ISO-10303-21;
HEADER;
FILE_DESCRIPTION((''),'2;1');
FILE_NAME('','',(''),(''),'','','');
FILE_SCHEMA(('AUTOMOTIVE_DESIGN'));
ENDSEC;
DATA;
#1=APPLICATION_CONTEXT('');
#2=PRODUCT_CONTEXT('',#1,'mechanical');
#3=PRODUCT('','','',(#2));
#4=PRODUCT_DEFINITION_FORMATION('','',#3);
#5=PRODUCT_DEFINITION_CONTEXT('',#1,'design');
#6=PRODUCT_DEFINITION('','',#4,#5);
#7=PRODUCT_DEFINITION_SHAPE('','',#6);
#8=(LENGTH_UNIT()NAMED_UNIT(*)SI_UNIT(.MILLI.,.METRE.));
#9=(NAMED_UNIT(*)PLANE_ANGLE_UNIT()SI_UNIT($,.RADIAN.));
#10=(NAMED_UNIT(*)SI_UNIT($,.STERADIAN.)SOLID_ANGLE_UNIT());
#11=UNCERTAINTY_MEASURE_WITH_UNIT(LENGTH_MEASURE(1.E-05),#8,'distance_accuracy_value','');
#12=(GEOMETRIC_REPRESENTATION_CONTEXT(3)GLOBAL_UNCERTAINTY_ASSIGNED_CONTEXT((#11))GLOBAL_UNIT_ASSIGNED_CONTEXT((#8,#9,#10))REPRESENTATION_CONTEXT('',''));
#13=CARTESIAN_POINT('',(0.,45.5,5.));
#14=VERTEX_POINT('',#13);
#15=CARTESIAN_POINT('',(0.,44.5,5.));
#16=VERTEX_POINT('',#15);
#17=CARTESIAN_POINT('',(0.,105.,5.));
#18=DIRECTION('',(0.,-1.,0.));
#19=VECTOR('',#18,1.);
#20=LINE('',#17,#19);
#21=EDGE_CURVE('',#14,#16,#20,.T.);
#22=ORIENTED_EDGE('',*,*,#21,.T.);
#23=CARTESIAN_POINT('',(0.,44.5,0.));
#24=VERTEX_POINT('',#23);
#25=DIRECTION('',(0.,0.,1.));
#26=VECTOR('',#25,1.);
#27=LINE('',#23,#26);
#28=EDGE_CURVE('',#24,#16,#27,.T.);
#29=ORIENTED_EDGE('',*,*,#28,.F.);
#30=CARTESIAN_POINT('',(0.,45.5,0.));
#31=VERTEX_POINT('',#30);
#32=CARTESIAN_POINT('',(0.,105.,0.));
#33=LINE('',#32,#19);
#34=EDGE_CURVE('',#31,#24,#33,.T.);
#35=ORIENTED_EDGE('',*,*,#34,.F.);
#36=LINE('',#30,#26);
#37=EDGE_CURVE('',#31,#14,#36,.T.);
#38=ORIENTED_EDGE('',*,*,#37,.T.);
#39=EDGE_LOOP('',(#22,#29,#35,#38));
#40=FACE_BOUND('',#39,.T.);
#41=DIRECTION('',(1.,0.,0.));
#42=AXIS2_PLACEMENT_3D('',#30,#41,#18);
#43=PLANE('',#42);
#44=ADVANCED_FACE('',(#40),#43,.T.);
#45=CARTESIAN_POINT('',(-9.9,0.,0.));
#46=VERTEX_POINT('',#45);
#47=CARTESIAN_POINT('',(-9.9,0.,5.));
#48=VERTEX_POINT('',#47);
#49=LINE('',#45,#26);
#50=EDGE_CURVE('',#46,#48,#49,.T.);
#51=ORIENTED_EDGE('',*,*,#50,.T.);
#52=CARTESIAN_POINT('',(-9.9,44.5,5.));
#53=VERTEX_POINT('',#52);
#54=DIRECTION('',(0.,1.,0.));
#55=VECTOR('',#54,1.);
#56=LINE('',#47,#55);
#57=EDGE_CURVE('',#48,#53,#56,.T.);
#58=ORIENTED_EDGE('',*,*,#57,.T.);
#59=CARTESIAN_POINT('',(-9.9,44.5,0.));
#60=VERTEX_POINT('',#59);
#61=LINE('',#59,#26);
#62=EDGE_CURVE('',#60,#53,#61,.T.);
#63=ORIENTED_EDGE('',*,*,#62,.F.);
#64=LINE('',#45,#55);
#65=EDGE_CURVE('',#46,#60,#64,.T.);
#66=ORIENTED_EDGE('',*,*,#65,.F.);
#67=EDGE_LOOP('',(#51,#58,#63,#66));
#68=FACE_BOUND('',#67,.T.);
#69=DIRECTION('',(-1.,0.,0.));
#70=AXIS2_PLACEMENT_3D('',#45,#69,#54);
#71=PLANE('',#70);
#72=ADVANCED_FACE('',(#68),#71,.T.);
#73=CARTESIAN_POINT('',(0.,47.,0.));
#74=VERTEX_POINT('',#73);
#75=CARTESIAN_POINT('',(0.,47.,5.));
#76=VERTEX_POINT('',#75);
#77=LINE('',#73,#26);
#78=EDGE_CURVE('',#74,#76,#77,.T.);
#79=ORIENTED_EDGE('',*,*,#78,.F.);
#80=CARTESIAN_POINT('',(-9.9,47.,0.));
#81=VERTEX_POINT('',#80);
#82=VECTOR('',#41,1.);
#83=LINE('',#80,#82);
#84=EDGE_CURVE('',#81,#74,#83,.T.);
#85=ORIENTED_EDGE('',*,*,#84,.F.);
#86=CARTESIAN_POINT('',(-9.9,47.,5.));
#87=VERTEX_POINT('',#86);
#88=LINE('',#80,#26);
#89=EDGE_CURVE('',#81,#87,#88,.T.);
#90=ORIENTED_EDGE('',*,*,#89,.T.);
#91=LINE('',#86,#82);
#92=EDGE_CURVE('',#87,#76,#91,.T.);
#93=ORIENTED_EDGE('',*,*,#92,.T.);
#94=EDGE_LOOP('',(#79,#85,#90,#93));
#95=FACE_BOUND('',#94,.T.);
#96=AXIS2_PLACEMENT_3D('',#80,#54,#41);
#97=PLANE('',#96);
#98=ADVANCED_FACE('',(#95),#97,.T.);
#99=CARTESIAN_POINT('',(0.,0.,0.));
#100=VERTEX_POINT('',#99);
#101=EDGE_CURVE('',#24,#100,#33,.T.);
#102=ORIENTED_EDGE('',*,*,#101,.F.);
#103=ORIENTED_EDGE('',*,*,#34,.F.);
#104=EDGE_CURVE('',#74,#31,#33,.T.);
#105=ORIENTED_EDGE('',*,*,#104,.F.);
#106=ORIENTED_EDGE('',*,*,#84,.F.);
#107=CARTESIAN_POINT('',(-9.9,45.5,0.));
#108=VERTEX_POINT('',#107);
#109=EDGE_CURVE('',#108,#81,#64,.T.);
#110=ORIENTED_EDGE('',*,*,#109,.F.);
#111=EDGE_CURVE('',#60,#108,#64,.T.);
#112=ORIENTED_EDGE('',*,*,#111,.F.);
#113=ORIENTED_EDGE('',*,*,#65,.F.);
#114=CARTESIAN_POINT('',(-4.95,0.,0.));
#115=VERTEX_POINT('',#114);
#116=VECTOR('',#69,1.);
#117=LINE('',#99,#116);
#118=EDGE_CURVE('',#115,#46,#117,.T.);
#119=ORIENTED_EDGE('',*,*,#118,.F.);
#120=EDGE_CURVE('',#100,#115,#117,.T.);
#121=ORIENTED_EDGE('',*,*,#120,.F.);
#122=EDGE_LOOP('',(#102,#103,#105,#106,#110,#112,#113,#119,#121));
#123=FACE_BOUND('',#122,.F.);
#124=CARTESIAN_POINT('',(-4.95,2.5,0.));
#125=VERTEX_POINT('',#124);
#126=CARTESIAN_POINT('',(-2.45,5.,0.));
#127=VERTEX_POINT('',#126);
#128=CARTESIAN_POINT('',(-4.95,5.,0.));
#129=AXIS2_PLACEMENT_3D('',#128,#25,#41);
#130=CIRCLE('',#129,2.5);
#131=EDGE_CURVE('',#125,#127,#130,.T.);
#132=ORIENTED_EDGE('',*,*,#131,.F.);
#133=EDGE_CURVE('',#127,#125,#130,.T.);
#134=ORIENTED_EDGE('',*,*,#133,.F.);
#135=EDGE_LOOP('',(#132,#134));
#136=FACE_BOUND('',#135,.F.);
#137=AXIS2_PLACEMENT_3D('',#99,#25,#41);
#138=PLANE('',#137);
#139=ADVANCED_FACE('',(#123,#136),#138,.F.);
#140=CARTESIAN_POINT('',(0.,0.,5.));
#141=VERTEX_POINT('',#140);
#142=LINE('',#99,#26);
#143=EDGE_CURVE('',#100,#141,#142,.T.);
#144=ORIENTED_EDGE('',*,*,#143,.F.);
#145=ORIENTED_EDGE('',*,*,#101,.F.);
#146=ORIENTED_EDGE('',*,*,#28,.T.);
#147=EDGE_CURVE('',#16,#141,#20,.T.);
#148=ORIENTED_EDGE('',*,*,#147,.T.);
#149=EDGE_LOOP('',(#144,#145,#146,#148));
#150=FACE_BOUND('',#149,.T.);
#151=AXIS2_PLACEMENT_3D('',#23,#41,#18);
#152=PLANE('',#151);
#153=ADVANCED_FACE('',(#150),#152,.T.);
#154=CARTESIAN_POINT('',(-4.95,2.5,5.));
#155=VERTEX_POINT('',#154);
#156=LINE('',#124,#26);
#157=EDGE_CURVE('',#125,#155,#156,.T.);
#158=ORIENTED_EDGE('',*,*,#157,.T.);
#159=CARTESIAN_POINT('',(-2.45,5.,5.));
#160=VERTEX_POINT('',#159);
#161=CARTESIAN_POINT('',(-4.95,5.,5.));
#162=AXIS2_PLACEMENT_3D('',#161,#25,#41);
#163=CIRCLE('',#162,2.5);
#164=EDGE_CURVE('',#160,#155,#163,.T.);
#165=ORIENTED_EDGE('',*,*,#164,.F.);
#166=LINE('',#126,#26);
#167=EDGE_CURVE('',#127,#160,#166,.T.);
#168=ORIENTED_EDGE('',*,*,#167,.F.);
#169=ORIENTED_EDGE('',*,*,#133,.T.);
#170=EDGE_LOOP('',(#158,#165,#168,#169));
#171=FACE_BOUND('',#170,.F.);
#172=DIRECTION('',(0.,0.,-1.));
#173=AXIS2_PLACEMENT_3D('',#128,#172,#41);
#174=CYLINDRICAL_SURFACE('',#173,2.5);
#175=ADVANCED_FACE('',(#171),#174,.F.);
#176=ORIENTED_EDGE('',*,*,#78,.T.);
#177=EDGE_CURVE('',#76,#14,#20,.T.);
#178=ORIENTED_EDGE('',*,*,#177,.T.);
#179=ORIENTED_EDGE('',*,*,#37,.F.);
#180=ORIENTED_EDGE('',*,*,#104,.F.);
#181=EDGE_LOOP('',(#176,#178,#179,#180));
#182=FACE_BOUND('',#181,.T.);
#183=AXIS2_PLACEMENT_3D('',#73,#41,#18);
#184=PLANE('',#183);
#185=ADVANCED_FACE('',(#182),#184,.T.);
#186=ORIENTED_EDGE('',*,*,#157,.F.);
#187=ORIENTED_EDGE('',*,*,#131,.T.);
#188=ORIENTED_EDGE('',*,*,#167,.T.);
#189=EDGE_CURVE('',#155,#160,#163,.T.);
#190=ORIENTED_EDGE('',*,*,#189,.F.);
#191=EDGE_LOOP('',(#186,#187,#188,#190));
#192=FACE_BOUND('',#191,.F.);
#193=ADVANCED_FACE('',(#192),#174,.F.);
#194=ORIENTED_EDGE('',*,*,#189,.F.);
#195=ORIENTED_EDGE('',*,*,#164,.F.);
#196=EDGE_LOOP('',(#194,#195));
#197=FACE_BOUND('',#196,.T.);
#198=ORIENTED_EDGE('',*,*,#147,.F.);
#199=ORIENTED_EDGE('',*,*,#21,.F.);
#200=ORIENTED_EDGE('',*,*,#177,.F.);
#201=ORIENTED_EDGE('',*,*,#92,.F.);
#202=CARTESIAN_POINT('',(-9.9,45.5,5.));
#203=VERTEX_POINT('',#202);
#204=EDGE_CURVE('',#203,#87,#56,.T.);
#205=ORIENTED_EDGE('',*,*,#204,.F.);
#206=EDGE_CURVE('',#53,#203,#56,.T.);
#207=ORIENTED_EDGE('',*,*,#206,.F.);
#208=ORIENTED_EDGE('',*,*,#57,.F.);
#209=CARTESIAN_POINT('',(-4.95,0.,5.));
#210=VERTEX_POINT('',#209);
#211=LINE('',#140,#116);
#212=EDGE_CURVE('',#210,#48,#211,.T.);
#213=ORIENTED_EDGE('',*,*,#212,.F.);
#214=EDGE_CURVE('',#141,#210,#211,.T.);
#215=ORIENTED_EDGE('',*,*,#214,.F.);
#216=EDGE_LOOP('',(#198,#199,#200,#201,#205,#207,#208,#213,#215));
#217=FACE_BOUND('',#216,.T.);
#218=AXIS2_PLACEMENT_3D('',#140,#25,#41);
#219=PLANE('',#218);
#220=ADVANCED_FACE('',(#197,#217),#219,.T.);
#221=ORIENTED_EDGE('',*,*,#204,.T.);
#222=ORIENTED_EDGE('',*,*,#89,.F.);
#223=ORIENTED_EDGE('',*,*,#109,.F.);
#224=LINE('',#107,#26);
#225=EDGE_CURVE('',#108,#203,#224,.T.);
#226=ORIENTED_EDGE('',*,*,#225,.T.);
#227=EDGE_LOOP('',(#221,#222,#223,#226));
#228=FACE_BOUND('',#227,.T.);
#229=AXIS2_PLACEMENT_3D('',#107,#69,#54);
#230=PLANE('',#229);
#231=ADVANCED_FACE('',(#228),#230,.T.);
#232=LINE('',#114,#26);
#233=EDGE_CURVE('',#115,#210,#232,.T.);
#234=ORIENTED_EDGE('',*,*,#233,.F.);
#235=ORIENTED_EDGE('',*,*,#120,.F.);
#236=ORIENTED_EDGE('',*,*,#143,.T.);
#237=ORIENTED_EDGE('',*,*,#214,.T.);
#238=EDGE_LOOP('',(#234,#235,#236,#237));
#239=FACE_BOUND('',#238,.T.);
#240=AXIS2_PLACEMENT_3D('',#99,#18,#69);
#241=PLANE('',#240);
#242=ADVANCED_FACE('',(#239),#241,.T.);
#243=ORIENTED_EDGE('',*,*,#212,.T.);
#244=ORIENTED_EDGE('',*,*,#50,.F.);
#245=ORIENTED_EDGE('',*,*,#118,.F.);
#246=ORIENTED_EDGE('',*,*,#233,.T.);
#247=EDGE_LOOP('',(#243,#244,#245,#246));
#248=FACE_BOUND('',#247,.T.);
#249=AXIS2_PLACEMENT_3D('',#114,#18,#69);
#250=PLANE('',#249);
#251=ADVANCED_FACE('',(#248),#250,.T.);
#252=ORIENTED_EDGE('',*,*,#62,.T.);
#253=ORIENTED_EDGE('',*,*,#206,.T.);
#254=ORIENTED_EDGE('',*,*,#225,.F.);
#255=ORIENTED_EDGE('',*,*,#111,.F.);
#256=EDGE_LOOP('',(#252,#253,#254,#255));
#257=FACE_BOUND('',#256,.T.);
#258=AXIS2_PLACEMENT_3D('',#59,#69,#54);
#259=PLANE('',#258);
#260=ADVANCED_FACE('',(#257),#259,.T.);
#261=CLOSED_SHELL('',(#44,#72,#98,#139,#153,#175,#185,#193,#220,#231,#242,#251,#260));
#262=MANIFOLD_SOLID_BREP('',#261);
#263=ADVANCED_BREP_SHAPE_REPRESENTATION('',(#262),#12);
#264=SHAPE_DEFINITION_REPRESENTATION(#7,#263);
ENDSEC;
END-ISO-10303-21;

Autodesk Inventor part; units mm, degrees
ref_plane "YZ Plane" through (0, 0, 0) normal (1, 0, 0) x (0, 1, 0)
ref_plane "XZ Plane" through (0, 0, 0) normal (0, 1, 0) x (-1, 0, 0)
ref_plane "XY Plane" through (0, 0, 0) normal (0, 0, 1) x (1, 0, 0)
sketch "Sketch2" plane through (0, 0, 0) normal (0, 0, 1) x (1, 0, 0)
  line L0 (0, 0) -> (-9.9, 0)
  line L1 (-9.9, 0) -> (-9.9, 105)
  line L2 (-9.9, 105) -> (0, 105)
  line L3 (0, 105) -> (0, 0)
  line L4 (-4.95, 0) -> (-4.95, 2.5)
  line L5 (-4.95, 0) -> (-2.45, 0) construction
  circle A0 centre (-4.95, 5) radius 2.5
  line L6 (-4.95, 7.5) -> (32.05, 7.5) construction
  line L7 (0, 44.5) -> (0, 0)
  line L8 (0, 0) -> (-9.9, 0)
  line L9 (-9.9, 0) -> (-9.9, 44.5)
  line L10 (0, 45.5) -> (0, 0)
  line L11 (0, 0) -> (-9.9, 0)
  line L12 (-9.9, 0) -> (-9.9, 45.5)
  line L13 (-4.95, 7.5) -> (66.05, 7.5) construction
  line L14 (-9.9, 78.5) -> (0, 78.5)
  line L15 (0, 0) -> (-9.9, 0)
  line L16 (-9.9, 0) -> (-9.9, 47)
  line L17 (-9.9, 47) -> (0, 47)
  line L18 (0, 47) -> (0, 0)
  dimension "d35" = 5
  dimension "d4" = 9.9
  dimension "d5" = 105
  dimension "d33" = 2.5
  dimension "d34" = 90
  dimension "d46" = 9.9
  dimension "d47" = 47
extrude "Extrusion6" add sketch "Sketch2" along normal blind 5 contours L0 L1 L17 L3
properties part number "Elbow_Cube_Holder_TestFit_V2"
